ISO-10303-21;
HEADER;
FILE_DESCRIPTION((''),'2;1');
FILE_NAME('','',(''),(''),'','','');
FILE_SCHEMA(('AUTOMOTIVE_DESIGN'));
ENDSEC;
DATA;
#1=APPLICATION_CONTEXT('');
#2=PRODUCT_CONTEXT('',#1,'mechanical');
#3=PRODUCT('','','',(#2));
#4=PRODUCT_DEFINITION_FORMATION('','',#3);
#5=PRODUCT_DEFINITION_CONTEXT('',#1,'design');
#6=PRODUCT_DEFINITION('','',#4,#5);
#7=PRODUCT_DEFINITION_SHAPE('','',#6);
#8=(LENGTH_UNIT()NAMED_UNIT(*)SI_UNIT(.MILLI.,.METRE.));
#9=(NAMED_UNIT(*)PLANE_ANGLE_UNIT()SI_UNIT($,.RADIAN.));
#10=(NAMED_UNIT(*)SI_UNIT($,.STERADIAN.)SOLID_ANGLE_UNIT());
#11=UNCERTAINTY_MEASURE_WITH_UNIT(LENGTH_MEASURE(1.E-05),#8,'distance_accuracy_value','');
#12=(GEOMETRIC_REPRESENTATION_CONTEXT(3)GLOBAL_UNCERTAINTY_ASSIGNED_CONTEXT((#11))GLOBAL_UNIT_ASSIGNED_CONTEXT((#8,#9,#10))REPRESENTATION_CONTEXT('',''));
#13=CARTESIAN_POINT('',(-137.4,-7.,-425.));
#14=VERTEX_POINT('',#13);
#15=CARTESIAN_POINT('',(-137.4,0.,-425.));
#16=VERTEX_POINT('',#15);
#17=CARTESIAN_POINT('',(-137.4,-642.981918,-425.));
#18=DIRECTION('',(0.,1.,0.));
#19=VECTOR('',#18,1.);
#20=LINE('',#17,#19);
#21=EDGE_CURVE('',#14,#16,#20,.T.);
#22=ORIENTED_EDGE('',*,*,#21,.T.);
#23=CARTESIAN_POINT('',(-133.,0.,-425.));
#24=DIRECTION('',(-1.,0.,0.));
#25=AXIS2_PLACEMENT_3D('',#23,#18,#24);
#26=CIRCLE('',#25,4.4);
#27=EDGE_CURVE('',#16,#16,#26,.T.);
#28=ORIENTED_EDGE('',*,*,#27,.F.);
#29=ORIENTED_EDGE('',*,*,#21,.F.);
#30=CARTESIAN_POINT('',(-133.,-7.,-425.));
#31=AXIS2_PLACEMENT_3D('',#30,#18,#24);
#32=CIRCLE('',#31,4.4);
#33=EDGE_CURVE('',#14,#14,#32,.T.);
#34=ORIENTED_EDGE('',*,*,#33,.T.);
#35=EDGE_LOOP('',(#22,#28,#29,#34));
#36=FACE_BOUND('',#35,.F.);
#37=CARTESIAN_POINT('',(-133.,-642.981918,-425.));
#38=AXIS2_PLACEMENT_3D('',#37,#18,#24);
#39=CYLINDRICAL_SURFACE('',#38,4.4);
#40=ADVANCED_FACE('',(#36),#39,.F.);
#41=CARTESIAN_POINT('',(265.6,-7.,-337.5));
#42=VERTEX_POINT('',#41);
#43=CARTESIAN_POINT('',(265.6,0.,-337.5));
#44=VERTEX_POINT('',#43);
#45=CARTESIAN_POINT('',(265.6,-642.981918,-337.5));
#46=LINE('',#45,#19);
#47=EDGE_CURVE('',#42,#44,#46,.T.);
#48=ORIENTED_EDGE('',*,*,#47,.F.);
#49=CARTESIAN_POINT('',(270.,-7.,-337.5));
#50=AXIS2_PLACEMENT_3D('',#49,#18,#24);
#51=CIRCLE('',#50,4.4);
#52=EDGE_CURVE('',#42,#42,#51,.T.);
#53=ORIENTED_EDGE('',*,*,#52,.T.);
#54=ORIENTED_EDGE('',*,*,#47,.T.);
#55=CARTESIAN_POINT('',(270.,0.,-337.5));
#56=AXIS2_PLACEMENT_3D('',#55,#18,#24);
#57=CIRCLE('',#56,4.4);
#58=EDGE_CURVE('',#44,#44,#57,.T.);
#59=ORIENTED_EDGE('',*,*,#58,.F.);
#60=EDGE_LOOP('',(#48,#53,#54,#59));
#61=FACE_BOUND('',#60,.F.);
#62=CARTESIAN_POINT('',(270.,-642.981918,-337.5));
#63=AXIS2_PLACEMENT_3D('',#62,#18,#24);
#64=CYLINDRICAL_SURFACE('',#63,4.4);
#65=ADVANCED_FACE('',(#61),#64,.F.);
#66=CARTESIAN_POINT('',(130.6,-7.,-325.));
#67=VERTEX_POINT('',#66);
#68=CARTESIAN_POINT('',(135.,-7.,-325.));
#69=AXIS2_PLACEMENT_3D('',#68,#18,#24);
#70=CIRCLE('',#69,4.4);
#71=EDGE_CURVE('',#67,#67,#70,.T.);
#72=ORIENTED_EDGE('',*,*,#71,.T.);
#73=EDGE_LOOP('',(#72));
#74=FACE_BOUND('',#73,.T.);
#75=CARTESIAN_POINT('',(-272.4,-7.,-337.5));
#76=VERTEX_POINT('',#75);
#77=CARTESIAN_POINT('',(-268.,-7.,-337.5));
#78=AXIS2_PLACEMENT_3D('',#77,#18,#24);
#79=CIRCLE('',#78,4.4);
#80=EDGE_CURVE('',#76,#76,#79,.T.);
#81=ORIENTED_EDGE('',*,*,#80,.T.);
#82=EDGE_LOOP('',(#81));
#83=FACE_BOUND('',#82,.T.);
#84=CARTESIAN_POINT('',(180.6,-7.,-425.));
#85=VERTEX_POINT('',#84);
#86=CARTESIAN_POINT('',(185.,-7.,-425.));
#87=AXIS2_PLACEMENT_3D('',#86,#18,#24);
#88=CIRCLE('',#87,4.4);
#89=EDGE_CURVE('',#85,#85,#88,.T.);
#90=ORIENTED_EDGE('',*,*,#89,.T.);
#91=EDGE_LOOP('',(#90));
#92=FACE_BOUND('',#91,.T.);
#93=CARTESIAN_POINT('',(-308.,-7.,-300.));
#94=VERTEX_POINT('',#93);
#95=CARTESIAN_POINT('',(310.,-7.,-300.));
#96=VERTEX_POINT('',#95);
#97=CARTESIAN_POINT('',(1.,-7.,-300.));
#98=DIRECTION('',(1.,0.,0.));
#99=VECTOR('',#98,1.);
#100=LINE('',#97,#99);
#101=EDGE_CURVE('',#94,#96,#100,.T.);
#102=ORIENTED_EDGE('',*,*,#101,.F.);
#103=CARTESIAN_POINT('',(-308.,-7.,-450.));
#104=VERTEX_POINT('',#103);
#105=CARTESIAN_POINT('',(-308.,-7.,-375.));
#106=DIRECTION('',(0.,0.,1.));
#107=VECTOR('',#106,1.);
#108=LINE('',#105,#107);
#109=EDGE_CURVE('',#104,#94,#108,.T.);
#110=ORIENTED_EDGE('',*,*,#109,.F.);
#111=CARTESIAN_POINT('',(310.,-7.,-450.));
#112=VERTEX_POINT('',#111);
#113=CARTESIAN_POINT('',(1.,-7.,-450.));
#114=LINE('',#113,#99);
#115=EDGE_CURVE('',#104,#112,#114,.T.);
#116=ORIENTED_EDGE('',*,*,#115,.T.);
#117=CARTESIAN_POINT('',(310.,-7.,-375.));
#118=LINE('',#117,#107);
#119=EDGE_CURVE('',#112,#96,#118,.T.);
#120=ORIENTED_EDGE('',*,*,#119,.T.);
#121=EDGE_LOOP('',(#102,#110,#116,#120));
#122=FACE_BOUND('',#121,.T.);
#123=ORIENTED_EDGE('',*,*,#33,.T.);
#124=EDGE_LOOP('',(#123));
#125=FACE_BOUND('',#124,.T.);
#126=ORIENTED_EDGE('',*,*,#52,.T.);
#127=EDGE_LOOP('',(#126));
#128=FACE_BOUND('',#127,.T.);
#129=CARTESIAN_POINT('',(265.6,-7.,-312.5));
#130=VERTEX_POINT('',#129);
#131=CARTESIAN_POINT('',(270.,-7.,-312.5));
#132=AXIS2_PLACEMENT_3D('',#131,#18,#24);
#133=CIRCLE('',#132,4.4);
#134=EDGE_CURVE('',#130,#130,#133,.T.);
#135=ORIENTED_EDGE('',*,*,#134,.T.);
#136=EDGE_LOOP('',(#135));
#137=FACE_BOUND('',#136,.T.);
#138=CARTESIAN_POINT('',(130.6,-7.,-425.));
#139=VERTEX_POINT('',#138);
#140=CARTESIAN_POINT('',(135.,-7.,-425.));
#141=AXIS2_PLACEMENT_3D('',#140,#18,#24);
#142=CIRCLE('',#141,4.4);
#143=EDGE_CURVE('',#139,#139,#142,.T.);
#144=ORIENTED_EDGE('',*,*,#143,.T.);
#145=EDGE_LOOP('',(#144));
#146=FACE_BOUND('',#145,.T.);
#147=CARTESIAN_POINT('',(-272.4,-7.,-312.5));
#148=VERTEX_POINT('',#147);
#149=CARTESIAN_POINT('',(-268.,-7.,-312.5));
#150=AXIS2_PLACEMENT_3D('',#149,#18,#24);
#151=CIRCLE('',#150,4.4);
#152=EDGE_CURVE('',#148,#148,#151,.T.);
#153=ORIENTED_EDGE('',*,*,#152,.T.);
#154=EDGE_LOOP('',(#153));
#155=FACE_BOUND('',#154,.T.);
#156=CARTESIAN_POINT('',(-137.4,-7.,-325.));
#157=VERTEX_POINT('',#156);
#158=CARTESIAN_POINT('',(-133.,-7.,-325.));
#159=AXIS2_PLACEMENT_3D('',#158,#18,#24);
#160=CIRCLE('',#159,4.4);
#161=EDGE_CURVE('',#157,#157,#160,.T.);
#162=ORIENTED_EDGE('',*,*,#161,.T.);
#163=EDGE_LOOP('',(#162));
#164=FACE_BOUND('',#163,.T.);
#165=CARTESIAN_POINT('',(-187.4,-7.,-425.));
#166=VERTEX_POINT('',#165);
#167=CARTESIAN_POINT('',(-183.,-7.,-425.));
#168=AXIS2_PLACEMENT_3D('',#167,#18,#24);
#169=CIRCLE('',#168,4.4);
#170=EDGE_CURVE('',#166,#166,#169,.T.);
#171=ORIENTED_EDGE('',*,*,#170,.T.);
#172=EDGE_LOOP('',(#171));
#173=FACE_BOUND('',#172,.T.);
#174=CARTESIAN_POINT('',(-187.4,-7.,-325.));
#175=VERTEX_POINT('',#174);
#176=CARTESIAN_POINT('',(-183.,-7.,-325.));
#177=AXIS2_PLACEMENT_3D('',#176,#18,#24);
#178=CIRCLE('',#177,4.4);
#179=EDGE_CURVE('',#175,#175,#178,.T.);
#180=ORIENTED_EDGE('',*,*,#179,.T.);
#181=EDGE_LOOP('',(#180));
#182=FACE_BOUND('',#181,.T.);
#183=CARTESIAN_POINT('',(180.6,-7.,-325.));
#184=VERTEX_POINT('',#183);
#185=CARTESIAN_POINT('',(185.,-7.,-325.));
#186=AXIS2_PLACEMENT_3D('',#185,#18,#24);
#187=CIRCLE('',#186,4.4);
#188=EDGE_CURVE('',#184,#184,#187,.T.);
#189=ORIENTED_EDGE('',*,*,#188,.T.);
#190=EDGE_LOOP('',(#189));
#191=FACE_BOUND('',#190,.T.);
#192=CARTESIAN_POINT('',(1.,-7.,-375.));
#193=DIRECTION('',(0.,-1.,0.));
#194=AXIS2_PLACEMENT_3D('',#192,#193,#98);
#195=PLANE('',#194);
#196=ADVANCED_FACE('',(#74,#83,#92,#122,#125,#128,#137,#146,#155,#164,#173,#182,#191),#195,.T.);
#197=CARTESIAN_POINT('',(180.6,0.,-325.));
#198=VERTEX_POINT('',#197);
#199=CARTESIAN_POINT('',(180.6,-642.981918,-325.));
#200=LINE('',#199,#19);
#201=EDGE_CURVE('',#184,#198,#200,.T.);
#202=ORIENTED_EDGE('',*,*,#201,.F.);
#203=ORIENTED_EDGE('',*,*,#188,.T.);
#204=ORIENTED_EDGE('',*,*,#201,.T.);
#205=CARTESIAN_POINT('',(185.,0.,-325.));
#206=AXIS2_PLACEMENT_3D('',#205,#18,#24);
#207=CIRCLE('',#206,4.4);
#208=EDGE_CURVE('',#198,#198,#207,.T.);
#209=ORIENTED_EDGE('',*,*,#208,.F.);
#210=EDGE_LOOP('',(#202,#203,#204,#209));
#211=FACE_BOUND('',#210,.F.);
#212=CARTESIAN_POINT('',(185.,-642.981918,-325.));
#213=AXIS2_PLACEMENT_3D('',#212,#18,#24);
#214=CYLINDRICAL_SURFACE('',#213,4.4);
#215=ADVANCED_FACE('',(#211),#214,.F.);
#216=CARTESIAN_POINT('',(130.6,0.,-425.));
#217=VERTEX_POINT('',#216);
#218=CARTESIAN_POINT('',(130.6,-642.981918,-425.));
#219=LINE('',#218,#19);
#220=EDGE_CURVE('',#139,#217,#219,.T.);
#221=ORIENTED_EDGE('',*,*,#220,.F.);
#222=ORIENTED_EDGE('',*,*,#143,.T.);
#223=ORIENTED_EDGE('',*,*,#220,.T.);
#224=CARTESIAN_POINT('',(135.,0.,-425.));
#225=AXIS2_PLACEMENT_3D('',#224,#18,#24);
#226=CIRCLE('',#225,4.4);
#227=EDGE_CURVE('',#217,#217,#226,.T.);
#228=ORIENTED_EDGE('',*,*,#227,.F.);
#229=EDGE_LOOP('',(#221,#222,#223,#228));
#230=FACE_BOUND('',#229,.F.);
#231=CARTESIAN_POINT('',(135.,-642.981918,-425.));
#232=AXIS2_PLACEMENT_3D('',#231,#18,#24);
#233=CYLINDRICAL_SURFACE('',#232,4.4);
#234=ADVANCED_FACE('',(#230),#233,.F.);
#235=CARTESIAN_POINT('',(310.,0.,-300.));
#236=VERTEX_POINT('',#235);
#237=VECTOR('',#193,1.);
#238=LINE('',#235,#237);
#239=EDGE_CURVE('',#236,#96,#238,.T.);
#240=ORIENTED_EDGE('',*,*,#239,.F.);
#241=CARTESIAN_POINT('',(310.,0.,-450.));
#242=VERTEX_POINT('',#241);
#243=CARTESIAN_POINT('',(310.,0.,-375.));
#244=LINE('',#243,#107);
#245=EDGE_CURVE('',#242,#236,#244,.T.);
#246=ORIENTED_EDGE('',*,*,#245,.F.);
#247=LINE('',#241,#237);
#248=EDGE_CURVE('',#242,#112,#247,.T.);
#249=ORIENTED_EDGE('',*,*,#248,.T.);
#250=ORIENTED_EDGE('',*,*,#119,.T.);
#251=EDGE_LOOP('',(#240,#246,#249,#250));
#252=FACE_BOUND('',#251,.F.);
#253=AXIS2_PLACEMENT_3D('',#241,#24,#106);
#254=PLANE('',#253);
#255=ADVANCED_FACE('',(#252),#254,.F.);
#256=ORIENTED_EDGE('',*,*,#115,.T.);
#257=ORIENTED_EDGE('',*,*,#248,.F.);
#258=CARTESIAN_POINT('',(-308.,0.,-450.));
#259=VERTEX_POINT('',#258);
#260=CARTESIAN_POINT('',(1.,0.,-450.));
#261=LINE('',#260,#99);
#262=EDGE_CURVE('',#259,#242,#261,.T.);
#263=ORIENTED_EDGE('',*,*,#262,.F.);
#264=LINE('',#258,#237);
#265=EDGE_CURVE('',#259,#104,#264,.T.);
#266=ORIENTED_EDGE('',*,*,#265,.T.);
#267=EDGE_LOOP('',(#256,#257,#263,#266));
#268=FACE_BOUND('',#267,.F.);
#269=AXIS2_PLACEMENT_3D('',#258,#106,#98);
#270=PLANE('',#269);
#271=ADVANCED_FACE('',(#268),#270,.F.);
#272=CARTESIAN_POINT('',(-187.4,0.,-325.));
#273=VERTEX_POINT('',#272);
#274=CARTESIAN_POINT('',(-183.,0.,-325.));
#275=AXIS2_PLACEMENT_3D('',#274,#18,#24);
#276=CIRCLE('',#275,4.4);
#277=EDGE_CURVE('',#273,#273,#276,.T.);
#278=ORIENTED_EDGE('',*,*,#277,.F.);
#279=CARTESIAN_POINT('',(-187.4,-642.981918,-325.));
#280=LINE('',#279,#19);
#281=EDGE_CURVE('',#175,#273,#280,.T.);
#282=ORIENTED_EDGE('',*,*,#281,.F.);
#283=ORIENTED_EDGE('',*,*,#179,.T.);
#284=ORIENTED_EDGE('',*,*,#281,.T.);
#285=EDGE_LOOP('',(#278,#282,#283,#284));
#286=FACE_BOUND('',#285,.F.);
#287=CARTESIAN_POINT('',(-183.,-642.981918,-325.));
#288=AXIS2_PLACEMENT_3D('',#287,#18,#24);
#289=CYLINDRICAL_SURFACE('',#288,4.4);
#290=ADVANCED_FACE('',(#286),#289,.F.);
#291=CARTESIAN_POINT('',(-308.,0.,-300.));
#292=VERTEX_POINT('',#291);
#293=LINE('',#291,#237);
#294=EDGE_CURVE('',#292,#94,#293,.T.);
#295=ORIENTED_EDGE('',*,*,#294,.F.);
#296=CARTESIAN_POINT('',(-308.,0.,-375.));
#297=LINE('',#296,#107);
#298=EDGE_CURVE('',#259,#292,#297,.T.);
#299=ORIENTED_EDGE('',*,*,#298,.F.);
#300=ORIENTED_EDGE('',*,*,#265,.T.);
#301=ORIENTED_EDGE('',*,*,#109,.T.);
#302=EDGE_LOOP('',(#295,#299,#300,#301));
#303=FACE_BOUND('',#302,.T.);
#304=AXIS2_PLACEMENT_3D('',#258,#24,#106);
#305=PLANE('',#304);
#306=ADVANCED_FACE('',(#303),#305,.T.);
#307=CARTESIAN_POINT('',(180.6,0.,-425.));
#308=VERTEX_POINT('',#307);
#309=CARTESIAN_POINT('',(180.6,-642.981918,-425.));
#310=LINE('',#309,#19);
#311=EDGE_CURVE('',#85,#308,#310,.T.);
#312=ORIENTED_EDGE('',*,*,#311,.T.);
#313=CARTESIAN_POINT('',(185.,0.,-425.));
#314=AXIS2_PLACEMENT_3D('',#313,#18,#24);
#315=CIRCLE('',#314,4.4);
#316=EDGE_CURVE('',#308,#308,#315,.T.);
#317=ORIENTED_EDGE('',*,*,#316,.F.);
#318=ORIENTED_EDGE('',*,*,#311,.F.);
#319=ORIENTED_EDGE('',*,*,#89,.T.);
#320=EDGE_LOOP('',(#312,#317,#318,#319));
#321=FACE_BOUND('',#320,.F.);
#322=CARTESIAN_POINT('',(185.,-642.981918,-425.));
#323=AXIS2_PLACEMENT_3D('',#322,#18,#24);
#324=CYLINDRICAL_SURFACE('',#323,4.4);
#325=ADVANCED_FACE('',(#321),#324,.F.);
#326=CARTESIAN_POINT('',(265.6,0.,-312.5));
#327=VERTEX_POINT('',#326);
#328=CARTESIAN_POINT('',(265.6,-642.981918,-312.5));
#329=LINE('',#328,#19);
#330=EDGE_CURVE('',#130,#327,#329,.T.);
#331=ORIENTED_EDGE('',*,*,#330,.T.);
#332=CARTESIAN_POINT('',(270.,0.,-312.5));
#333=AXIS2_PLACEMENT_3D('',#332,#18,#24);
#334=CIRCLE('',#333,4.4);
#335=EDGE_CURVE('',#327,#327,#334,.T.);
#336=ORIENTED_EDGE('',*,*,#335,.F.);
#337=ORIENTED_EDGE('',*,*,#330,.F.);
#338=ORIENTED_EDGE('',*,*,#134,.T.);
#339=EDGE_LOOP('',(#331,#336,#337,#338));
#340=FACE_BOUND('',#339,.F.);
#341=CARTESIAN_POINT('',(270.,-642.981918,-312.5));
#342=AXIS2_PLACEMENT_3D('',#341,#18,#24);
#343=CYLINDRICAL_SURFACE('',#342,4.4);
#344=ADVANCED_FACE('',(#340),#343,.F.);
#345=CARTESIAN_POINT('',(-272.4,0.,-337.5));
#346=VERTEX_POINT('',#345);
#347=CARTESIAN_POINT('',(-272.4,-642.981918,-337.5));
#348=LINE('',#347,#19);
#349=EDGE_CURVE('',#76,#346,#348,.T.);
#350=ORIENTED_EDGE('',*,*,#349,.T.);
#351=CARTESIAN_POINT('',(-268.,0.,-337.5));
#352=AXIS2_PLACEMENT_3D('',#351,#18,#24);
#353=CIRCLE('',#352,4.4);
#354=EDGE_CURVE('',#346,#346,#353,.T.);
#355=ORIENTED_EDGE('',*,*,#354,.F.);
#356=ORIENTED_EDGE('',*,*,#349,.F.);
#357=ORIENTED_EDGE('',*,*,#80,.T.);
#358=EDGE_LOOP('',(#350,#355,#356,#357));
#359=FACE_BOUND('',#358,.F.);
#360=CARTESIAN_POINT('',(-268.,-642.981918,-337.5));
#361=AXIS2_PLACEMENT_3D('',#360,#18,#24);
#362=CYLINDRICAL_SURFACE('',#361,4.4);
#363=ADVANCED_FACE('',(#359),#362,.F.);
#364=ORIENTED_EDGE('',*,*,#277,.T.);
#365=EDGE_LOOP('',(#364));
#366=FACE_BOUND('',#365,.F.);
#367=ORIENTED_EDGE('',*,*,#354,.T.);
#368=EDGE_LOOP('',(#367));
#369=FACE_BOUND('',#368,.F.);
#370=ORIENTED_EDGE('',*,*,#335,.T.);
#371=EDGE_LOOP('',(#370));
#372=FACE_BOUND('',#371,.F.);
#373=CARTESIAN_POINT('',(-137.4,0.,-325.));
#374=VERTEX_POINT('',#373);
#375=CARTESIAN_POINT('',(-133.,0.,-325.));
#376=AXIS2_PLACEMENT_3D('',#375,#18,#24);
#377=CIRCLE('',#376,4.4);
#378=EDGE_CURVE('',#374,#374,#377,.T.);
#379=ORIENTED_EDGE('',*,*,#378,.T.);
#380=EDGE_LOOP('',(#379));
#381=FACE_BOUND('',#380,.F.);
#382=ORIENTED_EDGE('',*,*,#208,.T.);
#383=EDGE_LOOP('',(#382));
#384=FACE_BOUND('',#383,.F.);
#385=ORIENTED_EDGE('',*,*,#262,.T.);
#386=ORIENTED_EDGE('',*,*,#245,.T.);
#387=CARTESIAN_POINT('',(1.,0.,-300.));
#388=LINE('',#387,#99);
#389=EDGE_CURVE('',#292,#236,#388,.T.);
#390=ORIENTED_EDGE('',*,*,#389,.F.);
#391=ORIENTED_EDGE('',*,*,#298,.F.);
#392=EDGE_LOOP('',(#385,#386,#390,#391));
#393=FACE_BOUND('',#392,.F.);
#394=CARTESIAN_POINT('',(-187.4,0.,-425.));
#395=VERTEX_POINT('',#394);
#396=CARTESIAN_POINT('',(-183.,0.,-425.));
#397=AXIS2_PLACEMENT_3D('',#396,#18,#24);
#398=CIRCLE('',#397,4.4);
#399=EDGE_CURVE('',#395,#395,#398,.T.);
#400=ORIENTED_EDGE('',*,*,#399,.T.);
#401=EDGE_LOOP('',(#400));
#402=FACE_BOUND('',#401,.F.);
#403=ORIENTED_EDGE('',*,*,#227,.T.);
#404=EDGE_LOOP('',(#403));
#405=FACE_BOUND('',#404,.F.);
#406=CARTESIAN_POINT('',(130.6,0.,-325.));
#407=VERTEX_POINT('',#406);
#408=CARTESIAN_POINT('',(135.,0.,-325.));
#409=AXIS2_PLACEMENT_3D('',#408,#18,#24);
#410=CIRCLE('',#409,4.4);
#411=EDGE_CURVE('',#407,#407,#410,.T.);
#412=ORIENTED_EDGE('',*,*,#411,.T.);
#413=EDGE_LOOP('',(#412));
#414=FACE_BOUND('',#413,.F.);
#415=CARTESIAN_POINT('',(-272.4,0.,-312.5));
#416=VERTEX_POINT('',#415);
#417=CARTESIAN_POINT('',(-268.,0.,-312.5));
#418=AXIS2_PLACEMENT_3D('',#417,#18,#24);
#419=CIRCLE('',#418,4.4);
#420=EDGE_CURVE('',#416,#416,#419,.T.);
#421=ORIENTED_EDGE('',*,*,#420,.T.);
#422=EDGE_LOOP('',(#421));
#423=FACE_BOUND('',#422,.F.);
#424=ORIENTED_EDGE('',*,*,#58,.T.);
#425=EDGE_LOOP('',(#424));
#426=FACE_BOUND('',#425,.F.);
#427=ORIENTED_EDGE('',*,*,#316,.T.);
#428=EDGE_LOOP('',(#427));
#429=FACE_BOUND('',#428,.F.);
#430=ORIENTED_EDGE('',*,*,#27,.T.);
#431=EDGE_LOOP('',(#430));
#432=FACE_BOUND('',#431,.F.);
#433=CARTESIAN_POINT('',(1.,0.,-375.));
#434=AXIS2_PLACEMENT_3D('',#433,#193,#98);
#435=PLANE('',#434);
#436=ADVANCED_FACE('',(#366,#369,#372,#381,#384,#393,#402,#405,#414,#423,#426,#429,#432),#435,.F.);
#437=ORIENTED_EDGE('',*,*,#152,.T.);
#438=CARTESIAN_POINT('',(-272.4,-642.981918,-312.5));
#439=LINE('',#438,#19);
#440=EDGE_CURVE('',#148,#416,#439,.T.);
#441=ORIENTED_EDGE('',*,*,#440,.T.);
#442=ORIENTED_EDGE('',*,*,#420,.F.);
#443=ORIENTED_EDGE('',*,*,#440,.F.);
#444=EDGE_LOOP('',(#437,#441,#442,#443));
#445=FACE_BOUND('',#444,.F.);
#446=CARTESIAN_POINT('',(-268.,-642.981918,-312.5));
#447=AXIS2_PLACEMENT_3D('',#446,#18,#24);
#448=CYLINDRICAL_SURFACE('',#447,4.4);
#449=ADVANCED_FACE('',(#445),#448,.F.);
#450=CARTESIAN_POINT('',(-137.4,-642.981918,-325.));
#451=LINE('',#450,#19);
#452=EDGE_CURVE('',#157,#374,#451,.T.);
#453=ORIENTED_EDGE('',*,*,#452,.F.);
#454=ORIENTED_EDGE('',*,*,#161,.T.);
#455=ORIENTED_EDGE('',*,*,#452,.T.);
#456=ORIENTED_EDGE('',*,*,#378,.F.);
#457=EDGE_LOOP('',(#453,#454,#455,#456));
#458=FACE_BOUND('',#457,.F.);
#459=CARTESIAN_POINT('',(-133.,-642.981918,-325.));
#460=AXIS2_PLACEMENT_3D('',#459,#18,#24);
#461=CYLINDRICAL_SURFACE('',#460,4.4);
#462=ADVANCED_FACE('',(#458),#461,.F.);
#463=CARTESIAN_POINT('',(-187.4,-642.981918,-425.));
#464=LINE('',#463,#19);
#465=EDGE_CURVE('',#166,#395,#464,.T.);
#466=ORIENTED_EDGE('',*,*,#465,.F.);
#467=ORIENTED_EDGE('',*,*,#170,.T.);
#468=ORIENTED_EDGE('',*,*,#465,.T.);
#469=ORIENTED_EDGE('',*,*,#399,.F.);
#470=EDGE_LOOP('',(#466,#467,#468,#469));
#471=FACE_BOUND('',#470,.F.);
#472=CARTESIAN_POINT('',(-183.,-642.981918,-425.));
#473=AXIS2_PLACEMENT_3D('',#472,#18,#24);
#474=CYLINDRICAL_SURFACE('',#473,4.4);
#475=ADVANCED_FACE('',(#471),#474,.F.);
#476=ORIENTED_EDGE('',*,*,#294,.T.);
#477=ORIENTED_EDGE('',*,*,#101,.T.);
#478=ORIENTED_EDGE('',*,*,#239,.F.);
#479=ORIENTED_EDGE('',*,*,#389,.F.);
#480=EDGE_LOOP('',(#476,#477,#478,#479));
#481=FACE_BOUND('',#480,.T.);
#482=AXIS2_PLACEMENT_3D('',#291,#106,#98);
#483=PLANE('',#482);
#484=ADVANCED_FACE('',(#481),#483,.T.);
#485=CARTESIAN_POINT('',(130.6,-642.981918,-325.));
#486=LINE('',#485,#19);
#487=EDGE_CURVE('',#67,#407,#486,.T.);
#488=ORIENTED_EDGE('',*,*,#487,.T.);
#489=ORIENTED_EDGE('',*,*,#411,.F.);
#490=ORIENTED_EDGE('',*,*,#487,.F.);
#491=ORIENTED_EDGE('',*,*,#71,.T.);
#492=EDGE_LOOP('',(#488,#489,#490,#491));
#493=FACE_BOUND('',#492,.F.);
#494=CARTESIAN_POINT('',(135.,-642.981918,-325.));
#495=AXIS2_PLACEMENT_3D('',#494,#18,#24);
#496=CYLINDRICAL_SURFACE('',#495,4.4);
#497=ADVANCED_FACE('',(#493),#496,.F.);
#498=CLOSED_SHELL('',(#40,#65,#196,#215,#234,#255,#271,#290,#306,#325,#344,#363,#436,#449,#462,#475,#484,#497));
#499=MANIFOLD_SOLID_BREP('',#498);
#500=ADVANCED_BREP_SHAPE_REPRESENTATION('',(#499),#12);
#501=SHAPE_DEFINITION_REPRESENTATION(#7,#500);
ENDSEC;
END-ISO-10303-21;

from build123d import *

# Parameters (mm, degrees)
F0_W     = 618
F0_H     = 150
F1_DEPTH = 7
F3_D     = 8.8
F5_D     = 8.8


# Not quite as in the source:
# - a feature names something its author has since deleted; it is built from what else it names


with BuildPart() as f1:
    # F0 (on Front) → F1 (new body)
    with BuildSketch(Plane.XZ):
        with Locations((1, -375)):
            Rectangle(F0_W, F0_H)
    extrude(amount=F1_DEPTH)

    # F3 (through all)
    with Locations(Plane.XZ.offset(7)):
        with Locations((-183, -325), (-133, -325), (185, -325), (185, -425), (135, -425), (-133, -425), (-183, -425), (135, -325)):
            Hole(F3_D / 2)

    # F5 (through all)
    with Locations(Plane.XZ.offset(7)):
        with Locations((-268, -337.5), (-268, -312.5), (270, -337.5), (270, -312.5)):
            Hole(F5_D / 2)


solid = f1.part
